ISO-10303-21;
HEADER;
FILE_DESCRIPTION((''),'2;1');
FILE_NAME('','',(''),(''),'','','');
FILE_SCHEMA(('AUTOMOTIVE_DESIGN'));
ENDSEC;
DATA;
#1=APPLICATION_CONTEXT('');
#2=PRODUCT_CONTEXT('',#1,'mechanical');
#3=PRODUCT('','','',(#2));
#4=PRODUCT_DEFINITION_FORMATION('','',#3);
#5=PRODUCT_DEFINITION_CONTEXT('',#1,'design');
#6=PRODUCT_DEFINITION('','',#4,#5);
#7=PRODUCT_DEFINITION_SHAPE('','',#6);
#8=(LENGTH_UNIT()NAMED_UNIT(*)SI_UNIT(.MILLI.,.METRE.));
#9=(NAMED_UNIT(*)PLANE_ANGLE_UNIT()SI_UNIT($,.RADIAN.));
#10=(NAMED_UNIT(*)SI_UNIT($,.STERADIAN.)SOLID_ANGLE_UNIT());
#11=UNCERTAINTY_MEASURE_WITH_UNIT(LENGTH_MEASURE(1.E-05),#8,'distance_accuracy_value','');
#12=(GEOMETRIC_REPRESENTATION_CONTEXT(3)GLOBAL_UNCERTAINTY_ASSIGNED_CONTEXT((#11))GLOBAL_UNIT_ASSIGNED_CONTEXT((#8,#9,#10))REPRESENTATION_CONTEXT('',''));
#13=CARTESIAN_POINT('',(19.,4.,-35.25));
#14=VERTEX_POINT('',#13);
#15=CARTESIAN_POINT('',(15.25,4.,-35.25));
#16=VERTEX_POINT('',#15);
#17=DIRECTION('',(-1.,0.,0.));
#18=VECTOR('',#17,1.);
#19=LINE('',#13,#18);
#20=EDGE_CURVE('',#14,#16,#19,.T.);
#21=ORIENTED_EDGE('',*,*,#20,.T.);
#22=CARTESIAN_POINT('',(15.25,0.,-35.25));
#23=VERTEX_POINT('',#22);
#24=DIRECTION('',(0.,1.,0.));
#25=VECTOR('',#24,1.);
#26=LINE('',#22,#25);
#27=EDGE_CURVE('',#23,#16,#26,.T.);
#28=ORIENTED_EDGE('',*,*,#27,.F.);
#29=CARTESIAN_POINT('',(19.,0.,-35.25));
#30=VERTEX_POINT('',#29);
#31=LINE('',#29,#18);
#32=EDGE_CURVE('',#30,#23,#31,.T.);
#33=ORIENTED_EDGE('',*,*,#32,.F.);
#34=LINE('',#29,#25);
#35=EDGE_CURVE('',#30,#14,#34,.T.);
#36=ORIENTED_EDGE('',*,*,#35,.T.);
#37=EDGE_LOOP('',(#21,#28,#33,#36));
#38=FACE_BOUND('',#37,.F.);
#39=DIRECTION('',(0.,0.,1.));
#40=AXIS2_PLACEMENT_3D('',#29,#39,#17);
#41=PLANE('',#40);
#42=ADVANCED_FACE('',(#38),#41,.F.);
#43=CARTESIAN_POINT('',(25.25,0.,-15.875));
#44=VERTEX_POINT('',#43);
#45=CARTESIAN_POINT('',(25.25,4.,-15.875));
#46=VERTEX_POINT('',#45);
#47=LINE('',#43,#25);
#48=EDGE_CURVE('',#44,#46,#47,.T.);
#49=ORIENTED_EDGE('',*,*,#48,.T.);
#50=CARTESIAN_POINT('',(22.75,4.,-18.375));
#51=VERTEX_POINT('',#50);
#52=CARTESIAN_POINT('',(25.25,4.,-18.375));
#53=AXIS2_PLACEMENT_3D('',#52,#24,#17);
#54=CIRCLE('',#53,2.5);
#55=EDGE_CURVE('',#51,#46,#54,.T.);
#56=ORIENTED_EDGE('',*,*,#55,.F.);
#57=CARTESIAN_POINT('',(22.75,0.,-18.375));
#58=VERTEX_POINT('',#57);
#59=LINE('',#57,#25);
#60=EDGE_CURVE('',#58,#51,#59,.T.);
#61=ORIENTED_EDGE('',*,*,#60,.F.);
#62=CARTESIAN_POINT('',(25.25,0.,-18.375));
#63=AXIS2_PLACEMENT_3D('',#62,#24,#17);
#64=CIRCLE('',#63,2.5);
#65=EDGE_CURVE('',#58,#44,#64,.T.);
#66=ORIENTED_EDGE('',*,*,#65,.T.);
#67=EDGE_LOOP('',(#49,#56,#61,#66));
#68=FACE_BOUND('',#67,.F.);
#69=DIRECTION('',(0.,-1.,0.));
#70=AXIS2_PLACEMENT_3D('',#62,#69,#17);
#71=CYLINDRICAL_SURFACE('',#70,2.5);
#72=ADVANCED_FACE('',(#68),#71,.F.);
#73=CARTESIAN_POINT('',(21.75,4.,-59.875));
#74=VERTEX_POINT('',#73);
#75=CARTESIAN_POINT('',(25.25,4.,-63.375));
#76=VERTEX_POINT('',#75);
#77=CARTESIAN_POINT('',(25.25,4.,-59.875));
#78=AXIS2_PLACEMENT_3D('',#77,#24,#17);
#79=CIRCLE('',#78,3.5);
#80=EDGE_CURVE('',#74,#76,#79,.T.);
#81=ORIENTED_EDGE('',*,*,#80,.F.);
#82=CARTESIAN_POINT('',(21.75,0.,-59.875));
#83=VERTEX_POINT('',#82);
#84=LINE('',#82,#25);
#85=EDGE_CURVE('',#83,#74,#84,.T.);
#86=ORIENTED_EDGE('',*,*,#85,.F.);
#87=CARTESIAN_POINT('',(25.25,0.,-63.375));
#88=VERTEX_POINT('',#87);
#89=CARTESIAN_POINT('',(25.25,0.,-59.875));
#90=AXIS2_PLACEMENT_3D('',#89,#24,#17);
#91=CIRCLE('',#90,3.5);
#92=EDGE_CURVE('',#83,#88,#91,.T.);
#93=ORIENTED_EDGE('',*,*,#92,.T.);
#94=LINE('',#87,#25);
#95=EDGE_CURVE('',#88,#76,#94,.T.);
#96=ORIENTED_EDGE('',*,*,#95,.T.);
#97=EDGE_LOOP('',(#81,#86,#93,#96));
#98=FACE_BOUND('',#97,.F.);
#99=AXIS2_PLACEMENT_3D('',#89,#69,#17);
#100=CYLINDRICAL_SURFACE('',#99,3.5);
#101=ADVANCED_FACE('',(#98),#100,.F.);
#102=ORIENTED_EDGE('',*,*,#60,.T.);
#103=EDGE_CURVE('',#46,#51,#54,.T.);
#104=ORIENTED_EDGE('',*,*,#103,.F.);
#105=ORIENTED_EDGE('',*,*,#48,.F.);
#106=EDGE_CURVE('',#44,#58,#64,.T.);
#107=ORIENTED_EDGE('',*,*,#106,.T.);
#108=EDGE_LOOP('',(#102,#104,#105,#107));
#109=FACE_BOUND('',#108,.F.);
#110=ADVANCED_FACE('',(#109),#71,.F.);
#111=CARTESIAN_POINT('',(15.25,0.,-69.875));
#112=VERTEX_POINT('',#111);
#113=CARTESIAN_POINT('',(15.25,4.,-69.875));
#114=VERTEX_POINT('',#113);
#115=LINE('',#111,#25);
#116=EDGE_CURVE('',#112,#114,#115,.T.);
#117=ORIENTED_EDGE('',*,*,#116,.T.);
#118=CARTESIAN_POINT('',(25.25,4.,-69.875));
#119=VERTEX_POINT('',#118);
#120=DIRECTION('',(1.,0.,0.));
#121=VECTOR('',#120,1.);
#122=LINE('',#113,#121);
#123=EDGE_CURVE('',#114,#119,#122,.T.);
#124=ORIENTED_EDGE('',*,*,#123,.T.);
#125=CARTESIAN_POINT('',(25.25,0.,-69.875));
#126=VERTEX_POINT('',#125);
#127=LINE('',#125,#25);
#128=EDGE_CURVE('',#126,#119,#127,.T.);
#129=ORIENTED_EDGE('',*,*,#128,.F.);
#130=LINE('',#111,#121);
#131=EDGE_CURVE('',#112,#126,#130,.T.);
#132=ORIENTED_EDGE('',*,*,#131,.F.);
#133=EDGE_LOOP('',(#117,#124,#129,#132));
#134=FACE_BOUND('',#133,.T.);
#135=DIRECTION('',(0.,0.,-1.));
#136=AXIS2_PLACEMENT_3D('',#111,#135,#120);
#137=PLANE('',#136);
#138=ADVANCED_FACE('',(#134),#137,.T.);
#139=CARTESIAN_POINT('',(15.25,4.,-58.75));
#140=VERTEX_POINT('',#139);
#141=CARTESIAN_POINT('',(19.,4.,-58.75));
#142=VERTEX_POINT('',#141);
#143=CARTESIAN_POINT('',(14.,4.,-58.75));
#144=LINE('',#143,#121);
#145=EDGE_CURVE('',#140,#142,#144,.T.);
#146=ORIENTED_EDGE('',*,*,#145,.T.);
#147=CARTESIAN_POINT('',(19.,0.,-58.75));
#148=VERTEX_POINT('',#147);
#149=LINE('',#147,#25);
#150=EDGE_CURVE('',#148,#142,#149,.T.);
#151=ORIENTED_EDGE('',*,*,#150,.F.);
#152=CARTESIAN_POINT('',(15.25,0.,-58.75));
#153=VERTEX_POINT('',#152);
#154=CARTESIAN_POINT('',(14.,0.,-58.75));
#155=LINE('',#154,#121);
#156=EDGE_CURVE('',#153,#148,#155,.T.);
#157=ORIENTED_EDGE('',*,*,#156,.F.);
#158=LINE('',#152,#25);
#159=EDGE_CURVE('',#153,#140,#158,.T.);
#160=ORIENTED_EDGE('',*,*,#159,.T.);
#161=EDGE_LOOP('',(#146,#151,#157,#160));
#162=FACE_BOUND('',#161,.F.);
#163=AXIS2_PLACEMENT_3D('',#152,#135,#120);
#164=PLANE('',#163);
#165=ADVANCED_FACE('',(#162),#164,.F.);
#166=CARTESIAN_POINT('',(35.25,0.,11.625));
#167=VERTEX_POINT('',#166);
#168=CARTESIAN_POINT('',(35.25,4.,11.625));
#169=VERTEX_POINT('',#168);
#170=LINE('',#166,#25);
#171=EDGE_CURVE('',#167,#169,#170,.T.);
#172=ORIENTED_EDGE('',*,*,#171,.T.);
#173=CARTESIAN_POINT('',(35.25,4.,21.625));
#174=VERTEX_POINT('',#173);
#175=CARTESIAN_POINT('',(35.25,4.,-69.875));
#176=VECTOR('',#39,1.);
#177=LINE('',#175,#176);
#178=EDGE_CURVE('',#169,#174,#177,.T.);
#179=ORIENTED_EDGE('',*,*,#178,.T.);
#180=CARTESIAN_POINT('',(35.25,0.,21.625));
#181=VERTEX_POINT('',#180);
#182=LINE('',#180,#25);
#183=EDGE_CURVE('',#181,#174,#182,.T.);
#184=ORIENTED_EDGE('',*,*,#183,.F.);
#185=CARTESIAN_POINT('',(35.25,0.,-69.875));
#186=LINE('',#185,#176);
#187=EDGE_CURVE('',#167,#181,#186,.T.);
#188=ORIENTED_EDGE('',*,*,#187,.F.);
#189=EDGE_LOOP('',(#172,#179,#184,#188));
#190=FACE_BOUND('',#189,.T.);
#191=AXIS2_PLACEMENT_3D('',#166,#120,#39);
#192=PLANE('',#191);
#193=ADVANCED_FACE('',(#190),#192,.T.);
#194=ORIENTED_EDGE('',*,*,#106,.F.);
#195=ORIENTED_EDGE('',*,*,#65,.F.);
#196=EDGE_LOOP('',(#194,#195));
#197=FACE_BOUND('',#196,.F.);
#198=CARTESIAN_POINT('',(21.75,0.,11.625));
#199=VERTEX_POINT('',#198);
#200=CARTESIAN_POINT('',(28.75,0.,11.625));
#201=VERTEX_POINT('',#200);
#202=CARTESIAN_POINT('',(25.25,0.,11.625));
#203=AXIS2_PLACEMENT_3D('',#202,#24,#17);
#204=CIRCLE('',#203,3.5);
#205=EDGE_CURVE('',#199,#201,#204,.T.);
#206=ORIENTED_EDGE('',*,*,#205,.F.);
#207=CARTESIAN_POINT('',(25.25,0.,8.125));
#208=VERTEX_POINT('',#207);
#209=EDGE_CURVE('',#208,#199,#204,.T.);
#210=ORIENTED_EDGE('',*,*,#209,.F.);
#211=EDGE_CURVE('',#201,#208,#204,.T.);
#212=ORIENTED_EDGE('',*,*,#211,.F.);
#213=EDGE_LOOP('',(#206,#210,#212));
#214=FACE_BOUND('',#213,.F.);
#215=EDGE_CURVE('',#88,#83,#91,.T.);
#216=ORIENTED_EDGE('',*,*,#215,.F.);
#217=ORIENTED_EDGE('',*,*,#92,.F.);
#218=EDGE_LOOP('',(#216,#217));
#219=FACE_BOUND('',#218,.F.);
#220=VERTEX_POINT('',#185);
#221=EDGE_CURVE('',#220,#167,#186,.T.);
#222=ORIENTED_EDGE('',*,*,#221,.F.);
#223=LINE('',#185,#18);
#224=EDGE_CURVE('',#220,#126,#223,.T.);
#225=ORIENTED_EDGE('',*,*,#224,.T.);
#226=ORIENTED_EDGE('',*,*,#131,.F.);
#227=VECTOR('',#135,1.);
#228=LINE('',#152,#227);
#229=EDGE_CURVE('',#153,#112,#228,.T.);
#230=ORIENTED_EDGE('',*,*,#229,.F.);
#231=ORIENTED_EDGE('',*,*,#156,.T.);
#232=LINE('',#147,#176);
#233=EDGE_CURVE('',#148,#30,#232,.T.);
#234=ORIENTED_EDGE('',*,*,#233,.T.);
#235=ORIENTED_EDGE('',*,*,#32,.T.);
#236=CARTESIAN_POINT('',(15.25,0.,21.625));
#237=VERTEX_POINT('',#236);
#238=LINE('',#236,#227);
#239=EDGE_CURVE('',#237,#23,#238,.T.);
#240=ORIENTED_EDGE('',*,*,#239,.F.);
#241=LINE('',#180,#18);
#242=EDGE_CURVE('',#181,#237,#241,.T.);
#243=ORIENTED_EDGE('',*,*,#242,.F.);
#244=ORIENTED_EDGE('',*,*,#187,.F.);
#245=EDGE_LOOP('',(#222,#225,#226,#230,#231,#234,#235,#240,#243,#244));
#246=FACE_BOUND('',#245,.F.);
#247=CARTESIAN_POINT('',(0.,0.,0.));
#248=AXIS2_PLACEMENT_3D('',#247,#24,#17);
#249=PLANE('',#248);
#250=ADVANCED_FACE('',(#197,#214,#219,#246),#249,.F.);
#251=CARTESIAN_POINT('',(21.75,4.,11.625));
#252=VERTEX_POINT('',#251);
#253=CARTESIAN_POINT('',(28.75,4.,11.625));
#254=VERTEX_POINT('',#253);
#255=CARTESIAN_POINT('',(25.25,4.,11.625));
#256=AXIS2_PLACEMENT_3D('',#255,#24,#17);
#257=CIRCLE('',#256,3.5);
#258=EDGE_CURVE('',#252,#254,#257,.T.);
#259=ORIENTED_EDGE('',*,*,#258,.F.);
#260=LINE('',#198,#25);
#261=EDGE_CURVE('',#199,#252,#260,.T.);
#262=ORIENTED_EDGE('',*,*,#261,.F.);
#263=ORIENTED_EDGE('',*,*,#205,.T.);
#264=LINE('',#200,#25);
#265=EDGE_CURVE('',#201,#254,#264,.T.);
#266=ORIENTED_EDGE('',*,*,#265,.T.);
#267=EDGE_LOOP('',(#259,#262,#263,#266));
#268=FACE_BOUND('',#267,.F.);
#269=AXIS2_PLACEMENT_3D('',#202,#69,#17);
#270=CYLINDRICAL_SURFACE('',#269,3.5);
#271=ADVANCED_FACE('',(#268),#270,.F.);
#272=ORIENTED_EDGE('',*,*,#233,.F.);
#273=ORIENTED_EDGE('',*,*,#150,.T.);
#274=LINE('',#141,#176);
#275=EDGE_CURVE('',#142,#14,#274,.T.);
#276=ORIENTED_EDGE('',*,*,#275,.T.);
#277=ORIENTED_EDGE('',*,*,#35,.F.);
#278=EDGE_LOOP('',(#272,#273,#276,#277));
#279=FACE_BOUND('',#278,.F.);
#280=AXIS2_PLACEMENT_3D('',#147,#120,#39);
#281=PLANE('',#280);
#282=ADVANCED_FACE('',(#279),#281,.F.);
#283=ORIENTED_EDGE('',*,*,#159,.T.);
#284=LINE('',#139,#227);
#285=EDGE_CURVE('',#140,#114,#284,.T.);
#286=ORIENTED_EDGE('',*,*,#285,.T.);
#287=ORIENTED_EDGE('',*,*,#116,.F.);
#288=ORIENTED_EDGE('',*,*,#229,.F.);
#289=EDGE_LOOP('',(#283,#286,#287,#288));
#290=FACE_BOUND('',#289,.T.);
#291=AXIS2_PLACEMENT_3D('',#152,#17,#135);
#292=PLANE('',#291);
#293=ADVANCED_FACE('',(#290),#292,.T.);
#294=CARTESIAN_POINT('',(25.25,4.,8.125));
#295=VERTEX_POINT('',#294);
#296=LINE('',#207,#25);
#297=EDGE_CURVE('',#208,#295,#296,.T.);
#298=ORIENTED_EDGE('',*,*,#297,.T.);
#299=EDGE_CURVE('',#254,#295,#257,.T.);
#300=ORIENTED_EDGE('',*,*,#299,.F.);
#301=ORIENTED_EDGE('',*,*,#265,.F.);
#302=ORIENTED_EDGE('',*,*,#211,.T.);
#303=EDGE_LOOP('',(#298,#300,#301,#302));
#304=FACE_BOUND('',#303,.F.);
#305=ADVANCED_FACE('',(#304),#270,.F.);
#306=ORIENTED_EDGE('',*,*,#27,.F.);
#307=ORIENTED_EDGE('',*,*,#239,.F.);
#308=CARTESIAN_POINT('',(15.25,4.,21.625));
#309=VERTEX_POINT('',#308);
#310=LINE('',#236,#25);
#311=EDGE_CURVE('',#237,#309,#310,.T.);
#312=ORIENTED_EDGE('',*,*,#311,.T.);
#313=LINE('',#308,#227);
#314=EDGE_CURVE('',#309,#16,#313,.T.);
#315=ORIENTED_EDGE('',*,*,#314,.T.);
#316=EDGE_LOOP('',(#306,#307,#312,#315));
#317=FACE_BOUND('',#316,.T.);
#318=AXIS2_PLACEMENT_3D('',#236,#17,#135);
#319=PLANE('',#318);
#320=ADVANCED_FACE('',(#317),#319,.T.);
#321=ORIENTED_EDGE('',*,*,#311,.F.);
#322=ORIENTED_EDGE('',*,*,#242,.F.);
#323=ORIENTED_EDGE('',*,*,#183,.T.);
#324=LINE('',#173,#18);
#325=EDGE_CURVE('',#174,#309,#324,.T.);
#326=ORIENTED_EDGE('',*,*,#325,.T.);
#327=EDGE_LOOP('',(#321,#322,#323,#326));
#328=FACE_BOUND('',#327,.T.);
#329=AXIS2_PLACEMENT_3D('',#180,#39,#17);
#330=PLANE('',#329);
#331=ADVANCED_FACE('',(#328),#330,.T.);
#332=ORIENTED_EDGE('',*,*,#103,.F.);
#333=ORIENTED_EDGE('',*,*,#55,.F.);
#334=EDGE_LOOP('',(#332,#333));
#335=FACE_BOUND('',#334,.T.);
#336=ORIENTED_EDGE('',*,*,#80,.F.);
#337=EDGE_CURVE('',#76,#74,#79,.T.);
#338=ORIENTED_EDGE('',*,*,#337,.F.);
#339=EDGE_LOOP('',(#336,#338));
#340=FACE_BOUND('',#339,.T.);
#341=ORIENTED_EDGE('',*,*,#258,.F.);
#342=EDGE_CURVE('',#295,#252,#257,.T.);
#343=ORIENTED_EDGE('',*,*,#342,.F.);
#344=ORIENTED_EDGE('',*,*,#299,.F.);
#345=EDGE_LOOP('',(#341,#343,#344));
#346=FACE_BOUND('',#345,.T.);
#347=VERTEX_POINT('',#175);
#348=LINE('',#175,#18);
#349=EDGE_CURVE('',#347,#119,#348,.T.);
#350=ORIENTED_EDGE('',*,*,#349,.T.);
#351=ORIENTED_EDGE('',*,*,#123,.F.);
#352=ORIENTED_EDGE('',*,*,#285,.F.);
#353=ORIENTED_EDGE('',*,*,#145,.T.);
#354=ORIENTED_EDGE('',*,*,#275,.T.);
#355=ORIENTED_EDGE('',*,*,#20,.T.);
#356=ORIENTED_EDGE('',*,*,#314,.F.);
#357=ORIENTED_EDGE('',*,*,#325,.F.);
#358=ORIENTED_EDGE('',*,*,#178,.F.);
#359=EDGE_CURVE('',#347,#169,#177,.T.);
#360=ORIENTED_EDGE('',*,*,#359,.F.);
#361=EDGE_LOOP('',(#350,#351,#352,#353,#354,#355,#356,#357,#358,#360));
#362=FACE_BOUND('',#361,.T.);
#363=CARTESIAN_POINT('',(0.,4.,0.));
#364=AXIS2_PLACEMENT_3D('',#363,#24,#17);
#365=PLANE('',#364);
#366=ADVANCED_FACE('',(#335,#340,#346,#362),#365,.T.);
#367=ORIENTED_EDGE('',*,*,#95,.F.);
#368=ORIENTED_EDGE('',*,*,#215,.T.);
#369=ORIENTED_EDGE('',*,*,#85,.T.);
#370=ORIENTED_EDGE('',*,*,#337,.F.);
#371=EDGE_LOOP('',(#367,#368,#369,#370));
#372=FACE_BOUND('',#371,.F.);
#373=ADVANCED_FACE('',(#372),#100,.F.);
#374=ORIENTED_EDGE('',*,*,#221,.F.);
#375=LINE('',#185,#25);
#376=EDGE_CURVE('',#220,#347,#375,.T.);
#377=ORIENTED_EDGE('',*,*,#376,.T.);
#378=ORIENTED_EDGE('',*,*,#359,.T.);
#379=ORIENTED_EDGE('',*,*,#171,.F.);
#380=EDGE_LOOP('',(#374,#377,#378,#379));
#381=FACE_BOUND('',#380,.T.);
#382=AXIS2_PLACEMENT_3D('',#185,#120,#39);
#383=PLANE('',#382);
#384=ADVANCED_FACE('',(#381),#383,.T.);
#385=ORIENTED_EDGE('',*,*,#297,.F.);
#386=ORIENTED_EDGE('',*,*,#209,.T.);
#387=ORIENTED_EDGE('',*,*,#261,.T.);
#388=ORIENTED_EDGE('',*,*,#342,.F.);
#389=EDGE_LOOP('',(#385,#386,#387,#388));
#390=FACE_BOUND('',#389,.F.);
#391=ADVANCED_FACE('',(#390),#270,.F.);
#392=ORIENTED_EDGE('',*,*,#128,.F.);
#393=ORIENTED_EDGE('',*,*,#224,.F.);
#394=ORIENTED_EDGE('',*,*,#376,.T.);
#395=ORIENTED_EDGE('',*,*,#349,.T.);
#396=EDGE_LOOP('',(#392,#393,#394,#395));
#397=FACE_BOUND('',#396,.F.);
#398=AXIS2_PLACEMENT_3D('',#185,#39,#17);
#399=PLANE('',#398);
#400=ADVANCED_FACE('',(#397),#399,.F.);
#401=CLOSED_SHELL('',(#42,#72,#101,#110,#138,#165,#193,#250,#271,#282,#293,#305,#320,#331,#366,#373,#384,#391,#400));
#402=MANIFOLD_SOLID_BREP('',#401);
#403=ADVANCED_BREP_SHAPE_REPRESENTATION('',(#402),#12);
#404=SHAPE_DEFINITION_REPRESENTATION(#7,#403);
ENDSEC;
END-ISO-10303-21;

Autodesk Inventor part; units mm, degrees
ref_plane "YZ Plane" through (0, 0, 0) normal (1, 0, 0) x (0, 1, 0)
ref_plane "XZ Plane" through (0, 0, 0) normal (0, 1, 0) x (-1, 0, 0)
ref_plane "XY Plane" through (0, 0, 0) normal (0, 0, 1) x (1, 0, 0)
sketch "Sketch1" plane through (0, 0, 0) normal (0, 1, 0) x (-1, 0, 0)
  circle A0 centre (0, 0) radius 10.5
  line L0 (0, 0) -> (0, -23.5)
  circle A1 centre (0, -23.5) radius 5.25
  line L1 (0, -23.5) -> (0, -35.25)
  line L2 (-14, -35.25) -> (-14, -58.75)
  line L3 (-14, -58.75) -> (-19, -58.75)
  line L4 (-19, -58.75) -> (-19, -35.25)
  line L5 (-35.25, 21.625) -> (35.25, 21.625) construction
  line L6 (35.25, 21.625) -> (25.25, 21.625)
  line L7 (-35.25, -69.875) -> (-35.25, 21.625)
  line L8 (-35.25, 21.625) -> (-35.25, 11.625)
  line L9 (-35.25, 11.625) -> (-25.25, 11.625)
  circle A2 centre (-25.25, 11.625) radius 3.5
  line L10 (35.25, 21.625) -> (25.25, 21.625)
  line L11 (25.25, 21.625) -> (25.25, 11.625)
  circle A3 centre (25.25, 11.625) radius 3.5
  line L12 (35.25, -69.875) -> (25.25, -69.875)
  line L13 (25.25, -69.875) -> (25.25, -59.875)
  circle A4 centre (25.25, -59.875) radius 3.5
  line L14 (-35.25, -69.875) -> (-25.25, -69.875)
  line L15 (-25.25, -69.875) -> (-25.25, -59.875)
  circle A5 centre (-25.25, -59.875) radius 3.5
  line L16 (-25.25, 11.625) -> (-25.25, -18.375)
  circle A6 centre (-25.25, -18.375) radius 2.5
  circle A7 centre (25.25, -29.875) radius 2.5
  line L17 (-19, -35.25) -> (-14, -35.25)
  line L18 (-35.25, 21.625) -> (-15.25, 21.625)
  line L19 (35.25, 21.625) -> (35.25, 11.625)
  line L20 (35.25, -58.75) -> (35.25, -69.875)
  line L21 (35.25, -69.875) -> (25.25, -69.875)
  line L22 (-15.25, -69.875) -> (-35.25, -69.875)
  line L23 (-35.25, 21.625) -> (-15.25, 21.625)
  line L24 (25.25, 21.625) -> (35.25, 21.625)
  line L25 (-35.25, 21.625) -> (-15.25, 21.625)
  line L26 (25.25, 21.625) -> (35.25, 21.625)
  line L27 (25.25, -59.875) -> (25.25, -56.375)
  line L28 (25.25, -32.375) -> (25.25, -29.875)
  line L29 (-15.25, 21.625) -> (-15.25, -35.25)
  line L30 (-15.25, -58.75) -> (-15.25, -69.875)
  dimension "d53" = 7
  dimension "d63" = 5
  dimension "d0" = 21
  dimension "d1" = 23.5
  dimension "d2" = 10.5
  dimension "d3" = 11.75
  dimension "d5" = 23.5
  dimension "d6" = 5
  dimension "d7" = 23.5
  dimension "d9" = 70.5
  dimension "d41" = 70.5
  dimension "d42" = 91.5
  dimension "d43" = 10
  dimension "d44" = 10
  dimension "d45" = 7
  dimension "d46" = 10
  dimension "d47" = 10
  dimension "d48" = 90
  dimension "d50" = 7
  dimension "d51" = 10
  dimension "d52" = 10
  dimension "d54" = 10
  dimension "d55" = 10
  dimension "d56" = 7
  dimension "d60" = 30
  dimension "d61" = 30
  dimension "d62" = 5
  dimension "d65" = 20
extrude "Extrusion1" add sketch "Sketch1" along normal blind 4 contours L17 L4 L3 L30 L22 L14 L7 L18 L29
properties part number "m"
